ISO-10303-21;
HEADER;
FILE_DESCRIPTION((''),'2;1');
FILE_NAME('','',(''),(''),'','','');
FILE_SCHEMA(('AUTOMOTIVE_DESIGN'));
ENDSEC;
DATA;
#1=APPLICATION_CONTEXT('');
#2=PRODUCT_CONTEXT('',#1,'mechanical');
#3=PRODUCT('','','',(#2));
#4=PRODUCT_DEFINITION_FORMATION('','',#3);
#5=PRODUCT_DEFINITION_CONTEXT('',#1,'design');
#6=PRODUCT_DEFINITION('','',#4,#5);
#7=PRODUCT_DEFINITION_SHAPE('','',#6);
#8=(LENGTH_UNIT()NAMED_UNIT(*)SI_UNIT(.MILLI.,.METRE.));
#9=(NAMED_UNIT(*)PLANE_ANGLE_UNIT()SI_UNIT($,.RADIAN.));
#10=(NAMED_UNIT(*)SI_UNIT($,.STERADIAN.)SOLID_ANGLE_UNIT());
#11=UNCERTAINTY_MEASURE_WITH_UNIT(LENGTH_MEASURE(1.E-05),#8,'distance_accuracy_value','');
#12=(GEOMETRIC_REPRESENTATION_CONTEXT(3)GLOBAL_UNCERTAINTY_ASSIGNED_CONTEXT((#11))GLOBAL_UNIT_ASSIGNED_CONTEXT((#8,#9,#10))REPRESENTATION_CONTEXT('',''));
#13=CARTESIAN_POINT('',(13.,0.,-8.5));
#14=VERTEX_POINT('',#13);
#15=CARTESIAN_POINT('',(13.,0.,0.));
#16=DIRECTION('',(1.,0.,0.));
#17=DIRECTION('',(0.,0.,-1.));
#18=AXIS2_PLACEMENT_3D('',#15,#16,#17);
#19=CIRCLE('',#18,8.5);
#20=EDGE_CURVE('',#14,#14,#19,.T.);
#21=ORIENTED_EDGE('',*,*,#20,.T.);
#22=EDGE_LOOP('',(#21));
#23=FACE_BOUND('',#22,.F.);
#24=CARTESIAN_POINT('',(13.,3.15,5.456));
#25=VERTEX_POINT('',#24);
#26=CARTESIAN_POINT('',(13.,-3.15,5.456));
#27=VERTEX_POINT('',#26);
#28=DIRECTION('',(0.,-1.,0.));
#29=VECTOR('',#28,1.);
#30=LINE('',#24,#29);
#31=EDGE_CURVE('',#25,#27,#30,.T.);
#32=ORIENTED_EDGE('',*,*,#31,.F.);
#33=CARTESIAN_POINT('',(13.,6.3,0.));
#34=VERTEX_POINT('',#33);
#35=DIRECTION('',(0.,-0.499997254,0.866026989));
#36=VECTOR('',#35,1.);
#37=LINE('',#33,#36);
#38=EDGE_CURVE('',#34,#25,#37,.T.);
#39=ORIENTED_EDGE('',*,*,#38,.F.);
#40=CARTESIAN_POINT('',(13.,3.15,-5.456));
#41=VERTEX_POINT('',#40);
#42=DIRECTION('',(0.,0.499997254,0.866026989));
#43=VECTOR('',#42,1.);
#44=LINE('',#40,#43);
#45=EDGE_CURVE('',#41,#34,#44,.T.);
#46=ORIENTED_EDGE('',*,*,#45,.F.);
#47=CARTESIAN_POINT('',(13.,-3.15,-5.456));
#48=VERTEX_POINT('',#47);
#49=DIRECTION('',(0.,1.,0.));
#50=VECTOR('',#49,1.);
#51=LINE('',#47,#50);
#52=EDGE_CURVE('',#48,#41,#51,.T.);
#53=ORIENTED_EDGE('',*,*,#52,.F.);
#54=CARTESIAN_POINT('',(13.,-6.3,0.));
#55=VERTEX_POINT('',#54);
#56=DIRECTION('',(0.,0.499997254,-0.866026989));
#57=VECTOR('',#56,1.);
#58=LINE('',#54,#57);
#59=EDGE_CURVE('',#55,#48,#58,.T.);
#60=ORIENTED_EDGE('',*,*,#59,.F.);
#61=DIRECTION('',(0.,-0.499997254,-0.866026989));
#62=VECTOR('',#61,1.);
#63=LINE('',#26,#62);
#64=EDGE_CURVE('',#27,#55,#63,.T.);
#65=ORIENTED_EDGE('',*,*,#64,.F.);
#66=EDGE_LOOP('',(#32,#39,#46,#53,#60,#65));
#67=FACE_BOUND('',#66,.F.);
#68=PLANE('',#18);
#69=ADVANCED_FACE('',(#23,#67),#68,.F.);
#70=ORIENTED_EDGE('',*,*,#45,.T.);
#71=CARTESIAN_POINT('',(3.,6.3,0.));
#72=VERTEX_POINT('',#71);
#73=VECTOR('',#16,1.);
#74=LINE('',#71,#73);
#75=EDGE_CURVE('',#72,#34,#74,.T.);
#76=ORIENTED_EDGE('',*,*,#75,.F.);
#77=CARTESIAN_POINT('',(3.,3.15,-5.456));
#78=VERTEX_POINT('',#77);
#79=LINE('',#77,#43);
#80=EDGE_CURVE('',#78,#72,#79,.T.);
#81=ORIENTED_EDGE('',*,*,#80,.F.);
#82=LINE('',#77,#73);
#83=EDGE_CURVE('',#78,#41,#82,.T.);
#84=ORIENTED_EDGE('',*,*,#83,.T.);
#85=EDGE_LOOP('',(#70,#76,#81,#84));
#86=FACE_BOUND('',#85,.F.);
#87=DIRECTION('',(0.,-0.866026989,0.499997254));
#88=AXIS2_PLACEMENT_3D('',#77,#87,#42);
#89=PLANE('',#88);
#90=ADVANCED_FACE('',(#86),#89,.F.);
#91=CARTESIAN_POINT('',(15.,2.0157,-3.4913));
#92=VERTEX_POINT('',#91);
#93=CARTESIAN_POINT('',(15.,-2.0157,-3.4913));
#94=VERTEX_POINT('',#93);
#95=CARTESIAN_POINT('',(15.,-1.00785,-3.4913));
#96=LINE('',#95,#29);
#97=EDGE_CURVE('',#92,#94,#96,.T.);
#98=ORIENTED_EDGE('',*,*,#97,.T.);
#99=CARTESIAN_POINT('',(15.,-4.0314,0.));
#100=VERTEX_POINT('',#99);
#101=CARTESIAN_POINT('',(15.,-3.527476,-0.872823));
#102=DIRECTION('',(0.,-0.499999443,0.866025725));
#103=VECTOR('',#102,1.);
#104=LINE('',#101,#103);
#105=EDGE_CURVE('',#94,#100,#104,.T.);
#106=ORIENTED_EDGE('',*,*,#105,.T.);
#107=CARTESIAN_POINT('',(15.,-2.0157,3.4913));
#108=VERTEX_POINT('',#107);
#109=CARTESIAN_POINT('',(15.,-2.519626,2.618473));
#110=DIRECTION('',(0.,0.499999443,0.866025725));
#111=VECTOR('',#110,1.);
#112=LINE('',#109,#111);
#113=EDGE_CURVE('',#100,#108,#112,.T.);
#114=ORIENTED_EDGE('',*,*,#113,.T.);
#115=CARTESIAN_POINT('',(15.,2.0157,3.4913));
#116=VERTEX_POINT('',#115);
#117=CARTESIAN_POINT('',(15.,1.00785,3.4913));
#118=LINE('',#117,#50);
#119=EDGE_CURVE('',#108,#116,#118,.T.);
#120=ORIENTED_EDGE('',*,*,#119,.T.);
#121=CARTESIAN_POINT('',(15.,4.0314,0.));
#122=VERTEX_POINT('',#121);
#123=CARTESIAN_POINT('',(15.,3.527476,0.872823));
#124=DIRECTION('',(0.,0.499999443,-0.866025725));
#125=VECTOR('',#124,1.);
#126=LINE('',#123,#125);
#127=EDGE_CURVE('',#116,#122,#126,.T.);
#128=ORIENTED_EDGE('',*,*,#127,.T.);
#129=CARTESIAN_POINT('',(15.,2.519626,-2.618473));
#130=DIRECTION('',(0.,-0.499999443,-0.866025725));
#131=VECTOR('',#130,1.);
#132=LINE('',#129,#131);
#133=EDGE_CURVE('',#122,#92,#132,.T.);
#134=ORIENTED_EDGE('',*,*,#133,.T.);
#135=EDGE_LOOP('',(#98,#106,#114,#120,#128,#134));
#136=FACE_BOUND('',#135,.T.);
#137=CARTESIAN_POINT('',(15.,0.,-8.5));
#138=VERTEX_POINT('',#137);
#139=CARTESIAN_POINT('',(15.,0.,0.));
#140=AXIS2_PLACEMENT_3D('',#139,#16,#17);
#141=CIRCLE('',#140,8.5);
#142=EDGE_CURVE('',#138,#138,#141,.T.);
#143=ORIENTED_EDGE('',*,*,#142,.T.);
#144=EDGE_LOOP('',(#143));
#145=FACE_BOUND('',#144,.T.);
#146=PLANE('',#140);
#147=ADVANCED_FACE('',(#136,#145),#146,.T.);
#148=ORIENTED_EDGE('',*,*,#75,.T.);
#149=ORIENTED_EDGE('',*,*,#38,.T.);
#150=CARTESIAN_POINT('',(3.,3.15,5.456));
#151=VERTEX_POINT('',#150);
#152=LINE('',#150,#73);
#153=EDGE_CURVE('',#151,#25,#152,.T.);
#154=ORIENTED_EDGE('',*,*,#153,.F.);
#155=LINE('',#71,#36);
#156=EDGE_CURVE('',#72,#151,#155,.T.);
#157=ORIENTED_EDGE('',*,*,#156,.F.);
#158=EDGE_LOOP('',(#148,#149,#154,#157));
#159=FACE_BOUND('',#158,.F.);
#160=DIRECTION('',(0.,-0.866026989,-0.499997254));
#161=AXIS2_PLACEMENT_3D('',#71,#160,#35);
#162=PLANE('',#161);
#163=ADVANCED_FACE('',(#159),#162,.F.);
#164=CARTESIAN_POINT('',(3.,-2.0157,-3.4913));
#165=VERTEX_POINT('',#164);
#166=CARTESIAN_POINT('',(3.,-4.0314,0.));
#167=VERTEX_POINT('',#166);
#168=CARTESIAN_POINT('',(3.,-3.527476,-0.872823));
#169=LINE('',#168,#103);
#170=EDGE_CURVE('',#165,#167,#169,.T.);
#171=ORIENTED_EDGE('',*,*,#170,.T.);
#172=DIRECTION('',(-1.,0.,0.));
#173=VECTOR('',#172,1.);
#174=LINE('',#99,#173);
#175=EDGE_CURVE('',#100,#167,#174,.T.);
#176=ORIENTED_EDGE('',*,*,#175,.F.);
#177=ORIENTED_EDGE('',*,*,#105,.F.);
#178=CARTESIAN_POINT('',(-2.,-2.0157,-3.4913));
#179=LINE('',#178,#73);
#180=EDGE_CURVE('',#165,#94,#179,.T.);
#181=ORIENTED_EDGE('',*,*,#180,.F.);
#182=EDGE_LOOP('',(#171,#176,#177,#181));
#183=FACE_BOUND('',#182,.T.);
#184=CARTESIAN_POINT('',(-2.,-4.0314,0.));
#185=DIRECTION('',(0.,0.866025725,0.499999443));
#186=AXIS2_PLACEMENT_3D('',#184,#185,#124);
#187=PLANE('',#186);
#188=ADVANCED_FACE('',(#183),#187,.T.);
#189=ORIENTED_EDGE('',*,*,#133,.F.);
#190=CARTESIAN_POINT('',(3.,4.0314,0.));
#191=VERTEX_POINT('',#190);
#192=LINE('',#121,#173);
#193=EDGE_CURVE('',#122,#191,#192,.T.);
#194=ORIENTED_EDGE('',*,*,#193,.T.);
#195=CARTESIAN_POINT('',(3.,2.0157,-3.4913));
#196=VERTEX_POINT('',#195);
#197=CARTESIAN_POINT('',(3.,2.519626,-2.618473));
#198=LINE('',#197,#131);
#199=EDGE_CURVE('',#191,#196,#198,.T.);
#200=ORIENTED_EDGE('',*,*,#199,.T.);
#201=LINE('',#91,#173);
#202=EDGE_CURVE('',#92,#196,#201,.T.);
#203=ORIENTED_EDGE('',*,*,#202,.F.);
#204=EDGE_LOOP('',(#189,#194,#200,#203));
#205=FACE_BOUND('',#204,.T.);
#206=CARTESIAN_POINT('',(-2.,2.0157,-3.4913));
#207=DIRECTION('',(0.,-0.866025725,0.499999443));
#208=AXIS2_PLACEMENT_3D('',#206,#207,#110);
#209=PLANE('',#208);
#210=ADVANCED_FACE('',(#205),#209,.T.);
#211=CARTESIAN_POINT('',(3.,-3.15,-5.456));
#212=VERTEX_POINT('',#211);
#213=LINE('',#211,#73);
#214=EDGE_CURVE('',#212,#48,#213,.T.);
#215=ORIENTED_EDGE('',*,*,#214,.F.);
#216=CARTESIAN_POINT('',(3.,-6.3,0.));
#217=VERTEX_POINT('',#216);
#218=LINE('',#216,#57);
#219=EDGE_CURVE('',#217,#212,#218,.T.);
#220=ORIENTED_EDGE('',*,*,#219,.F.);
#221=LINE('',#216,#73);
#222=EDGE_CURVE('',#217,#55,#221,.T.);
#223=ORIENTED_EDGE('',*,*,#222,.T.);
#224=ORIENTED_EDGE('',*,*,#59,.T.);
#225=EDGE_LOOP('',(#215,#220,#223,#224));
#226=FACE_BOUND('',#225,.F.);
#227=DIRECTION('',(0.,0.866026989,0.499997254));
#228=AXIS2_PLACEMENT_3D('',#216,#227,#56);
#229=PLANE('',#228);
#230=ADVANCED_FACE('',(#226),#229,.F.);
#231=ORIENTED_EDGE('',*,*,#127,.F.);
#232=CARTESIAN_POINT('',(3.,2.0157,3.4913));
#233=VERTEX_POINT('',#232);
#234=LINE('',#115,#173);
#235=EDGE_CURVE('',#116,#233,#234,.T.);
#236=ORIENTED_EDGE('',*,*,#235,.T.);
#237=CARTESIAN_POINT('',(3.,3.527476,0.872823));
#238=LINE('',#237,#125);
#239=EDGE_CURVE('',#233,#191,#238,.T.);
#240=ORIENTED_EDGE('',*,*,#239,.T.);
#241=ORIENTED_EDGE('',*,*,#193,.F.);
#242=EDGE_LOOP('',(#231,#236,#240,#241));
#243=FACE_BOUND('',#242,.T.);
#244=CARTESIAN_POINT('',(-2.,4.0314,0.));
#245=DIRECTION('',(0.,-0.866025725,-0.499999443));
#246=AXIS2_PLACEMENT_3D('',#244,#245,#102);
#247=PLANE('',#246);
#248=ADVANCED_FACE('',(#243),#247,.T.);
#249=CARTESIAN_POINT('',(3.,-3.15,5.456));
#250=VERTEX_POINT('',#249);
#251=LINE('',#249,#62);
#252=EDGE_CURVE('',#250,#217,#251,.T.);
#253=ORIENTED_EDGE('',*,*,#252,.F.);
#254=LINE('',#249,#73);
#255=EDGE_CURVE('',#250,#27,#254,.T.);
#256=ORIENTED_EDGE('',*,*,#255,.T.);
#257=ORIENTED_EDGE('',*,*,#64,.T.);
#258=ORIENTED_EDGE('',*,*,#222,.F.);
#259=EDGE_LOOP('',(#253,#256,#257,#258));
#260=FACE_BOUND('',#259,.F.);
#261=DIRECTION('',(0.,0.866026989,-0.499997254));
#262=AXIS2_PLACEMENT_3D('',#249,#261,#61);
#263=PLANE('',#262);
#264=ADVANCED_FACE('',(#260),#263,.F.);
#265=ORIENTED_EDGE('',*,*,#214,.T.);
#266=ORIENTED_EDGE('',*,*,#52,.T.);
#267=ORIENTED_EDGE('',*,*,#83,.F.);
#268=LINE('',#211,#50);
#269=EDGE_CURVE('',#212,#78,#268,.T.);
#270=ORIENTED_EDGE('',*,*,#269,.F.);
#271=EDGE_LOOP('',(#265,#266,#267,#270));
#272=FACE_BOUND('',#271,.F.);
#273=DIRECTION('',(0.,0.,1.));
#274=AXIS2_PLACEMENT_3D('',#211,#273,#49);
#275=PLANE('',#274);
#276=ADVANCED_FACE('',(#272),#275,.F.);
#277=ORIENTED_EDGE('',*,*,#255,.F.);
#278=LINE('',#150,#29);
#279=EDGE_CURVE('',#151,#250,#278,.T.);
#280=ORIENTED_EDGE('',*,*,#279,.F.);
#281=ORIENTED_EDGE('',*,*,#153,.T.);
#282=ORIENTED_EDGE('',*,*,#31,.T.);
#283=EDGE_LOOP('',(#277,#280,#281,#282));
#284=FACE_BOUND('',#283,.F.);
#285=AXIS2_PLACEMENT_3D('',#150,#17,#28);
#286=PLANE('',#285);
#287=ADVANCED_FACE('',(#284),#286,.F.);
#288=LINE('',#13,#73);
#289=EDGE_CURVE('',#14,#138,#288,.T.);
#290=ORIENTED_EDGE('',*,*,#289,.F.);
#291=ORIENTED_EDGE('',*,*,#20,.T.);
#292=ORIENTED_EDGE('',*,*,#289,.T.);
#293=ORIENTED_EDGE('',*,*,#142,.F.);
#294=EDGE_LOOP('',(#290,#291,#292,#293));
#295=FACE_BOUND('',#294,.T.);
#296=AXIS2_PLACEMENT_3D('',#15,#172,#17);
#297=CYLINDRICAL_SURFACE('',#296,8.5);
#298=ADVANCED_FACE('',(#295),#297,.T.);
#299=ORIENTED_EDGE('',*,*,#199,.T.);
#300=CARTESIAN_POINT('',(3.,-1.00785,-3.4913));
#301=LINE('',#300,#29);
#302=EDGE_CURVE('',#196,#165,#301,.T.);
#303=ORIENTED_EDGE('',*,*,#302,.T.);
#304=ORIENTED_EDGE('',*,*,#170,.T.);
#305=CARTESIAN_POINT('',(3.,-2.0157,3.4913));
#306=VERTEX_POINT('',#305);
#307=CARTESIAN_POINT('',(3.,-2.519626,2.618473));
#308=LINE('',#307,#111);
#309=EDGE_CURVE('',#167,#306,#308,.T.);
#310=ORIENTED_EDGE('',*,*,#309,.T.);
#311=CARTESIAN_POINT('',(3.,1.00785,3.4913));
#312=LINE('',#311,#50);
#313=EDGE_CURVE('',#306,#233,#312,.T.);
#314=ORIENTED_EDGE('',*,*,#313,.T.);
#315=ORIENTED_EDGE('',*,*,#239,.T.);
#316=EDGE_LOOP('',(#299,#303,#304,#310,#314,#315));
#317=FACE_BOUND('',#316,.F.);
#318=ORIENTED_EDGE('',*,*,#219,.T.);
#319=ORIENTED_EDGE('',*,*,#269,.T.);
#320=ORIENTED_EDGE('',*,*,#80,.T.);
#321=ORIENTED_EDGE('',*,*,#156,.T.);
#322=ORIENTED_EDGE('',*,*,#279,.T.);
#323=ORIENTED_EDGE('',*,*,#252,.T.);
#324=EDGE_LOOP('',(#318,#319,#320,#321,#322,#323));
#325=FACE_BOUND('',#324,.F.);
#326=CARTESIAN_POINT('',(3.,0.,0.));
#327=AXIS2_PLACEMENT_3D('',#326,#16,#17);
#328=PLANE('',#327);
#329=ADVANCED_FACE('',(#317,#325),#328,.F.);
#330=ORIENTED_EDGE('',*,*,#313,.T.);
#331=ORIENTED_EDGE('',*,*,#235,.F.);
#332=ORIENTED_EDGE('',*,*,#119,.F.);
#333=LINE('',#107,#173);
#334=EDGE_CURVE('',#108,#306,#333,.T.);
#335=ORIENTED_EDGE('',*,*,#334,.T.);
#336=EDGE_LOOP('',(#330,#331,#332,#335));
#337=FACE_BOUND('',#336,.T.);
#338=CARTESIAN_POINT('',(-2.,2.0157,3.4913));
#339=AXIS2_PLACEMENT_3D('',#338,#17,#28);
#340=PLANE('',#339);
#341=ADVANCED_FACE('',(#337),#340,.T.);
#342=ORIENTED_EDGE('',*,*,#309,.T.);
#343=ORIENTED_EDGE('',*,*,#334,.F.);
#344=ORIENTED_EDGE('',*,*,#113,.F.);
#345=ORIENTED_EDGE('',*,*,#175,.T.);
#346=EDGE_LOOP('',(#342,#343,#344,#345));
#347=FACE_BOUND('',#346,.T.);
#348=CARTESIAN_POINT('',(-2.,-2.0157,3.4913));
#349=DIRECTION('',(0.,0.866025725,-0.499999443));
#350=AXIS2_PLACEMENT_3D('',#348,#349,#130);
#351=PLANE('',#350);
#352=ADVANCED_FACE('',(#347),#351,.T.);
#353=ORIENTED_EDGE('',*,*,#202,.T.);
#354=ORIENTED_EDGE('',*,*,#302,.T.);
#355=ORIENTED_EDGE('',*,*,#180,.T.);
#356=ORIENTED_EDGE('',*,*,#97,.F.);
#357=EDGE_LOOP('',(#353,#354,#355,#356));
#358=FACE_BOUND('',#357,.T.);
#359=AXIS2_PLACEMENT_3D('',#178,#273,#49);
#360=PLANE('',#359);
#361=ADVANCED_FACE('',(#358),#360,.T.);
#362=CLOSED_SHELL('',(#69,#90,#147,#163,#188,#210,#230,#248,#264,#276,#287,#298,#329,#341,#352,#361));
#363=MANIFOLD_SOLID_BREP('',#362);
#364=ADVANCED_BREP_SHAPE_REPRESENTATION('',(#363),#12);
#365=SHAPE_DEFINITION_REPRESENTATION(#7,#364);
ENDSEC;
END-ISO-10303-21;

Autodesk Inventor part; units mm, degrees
ref_plane "YZ Plane" through (0, 0, 0) normal (1, 0, 0) x (0, 1, 0)
ref_plane "XZ Plane" through (0, 0, 0) normal (0, 1, 0) x (-1, 0, 0)
ref_plane "XY Plane" through (0, 0, 0) normal (0, 0, 1) x (1, 0, 0)
sketch "Sketch1" plane through (0, 0, 0) normal (1, 0, 0) x (0, 1, 0)
  line L0 (0, 0) -> (3, 0) construction
  line L1 (3, 0) -> (3, -15.0663) construction
  line L2 (3, -15.0663) -> (0, -15.0663) construction
  line L3 (0, -15.0663) -> (0, 0) construction
  line L4 (0, 0) -> (-3, 0) construction
  line L5 (-3, 0) -> (-3, -15.0663) construction
  line L6 (-3, -15.0663) -> (0, -15.0663) construction
  line L7 (0, -15.0663) -> (0, 0) construction
  line L8 (3, -5.1752) -> (-2.9818, -5.1857)
  line L9 (-2.9818, -5.1857) -> (-5.9818, -0.0105)
  line L10 (-5.9818, -0.0105) -> (-3, 5.1752)
  line L11 (-3, 5.1752) -> (2.9818, 5.1857)
  line L12 (2.9818, 5.1857) -> (5.9818, 0.0105)
  line L13 (5.9818, 0.0105) -> (3, -5.1752)
  dimension "d0" = 3
  dimension "d1" = 3
extrude "Extrusion1" add sketch "Sketch1" along normal blind 3
sketch "Sketch2" plane through (0, 0, 0) normal (-1, 0, 0) x (0, 0, 1)
  point P0 (0, 0)
sketch "Sketch3" plane through (0, 0, 0) normal (-1, 0, 0) x (0, 0, 1)
  line L0 (-5.1752, 3) -> (0.0105, 5.9818) projected
  circle A0 centre (0, 0) radius 5.9818
extrude "Extrusion2" add sketch "Sketch3" along normal blind 2
sketch "Sketch4" plane through (3, 0, 0) normal (1, 0, 0) x (0, 0, -1)
  line L0 (0, -4.0315) -> (-3.4914, -2.0157) construction
  line L1 (-3.4914, -2.0157) -> (-3.4914, 2.0157) construction
  line L2 (-3.4914, 2.0157) -> (0, 4.0315) construction
  line L3 (0, 4.0315) -> (3.4914, 2.0157) construction
  line L4 (3.4914, 2.0157) -> (3.4914, -2.0157) construction
  line L5 (3.4914, -2.0157) -> (0, -4.0315) construction
  point P0 (0, 0)
  point P1 (0, 0)
sketch "Sketch5" plane through (3, 0, 0) normal (1, 0, 0) x (0, 0, -1)
  line L0 (0, -4.0314) -> (-3.4913, -2.0157)
  line L1 (-3.4913, -2.0157) -> (-3.4913, 2.0157)
  line L2 (-3.4913, 2.0157) -> (0, 4.0314)
  line L3 (0, 4.0314) -> (3.4913, 2.0157)
  line L4 (3.4913, 2.0157) -> (3.4913, -2.0157)
  line L5 (3.4913, -2.0157) -> (0, -4.0314)
  point P0 (0, 0)
  point P1 (0, 0)
extrude "Extrusion3" cut sketch "Sketch5" against normal blind 10
sketch "Sketch6" plane through (3, 0, 0) normal (1, 0, 0) x (0, 0, -1)
  point P0 (0, 0)
sketch "Sketch7" plane through (3, 0, 0) normal (1, 0, 0) x (0, 0, -1)
  line L0 (3.75, -6.5332) -> (-3.7829, -6.5142) construction
  line L1 (-3.7829, -6.5142) -> (-7.5329, 0.019) construction
  line L2 (-7.5329, 0.019) -> (-3.75, 6.5332) construction
  line L3 (-3.75, 6.5332) -> (3.7829, 6.5142) construction
  line L4 (3.7829, 6.5142) -> (7.5329, -0.019) construction
  line L5 (7.5329, -0.019) -> (3.75, -6.5332) construction
  line L6 (3.75, -6.5332) -> (-3.7829, -6.5142)
  line L7 (-3.7829, -6.5142) -> (-7.5329, 0.019)
  line L8 (-7.5329, 0.019) -> (-3.75, 6.5332)
  line L9 (-3.75, 6.5332) -> (3.7829, 6.5142)
  line L10 (3.7829, 6.5142) -> (7.5329, -0.019)
  line L11 (7.5329, -0.019) -> (3.75, -6.5332)
  point P0 (0, 0)
  point P1 (0, 0)
  point P2 (0, 0)
extrude "Extrusion4" add sketch "Sketch7" along normal blind 10
sketch "Sketch8" plane through (13, 0, 0) normal (1, 0, 0) x (0, 0, -1)
  circle A0 centre (0, 0) radius 8.5
  dimension "d11" = 17
extrude "Extrusion5" add sketch "Sketch8" along normal blind 2
sketch "Sketch9" plane through (-2, 0, 0) normal (-1, 0, 0) x (0, 0, 1)
  line L0 (0, -4.0314) -> (-3.4913, -2.0157) projected
  line L1 (-3.4913, -2.0157) -> (-3.4913, 2.0157)
  line L2 (-3.4913, 2.0157) -> (0, 4.0314)
  line L3 (0, 4.0314) -> (3.4913, 2.0157)
  line L4 (3.4913, 2.0157) -> (3.4913, -2.0157)
  line L5 (3.4913, -2.0157) -> (0, -4.0314)
  line L6 (0, -4.0314) -> (-3.4913, -2.0157)
  point P0 (0, 0)
  point P1 (0, 0)
extrude "Extrusion6" cut sketch "Sketch9" against normal blind 17.25
sketch "Sketch10" plane through (-2, 0, 0) normal (-1, 0, 0) x (0, 0, 1)
  circle A0 centre (0, 0) radius 5.9818
extrude "Extrusion7" cut sketch "Sketch10" against normal blind 5
sketch "Sketch11" plane through (3, 0, 0) normal (-1, 0, 0) x (0, 0, 1)
  line L0 (0, 6.3) -> (4.998, 6.3) construction
  line L1 (4.998, 6.3) -> (4.998, -6.3) construction
  line L2 (4.998, -6.3) -> (0, -6.3) construction
  line L3 (0, -6.3) -> (0, 6.3) construction
  line L4 (7.5329, 0.019) -> (3.75, 6.5332) projected
  line L5 (3.75, 6.5332) -> (7.5329, 0.019)
  line L6 (7.5329, 0.019) -> (3.7829, -6.5142)
  line L7 (3.7829, -6.5142) -> (-3.75, -6.5332)
  line L8 (-3.75, -6.5332) -> (-7.5329, -0.019)
  line L9 (-7.5329, -0.019) -> (-3.7829, 6.5142)
  line L10 (-3.7829, 6.5142) -> (3.75, 6.5332)
  line L11 (0, 6.3) -> (5.456, 3.15)
  line L12 (5.456, 3.15) -> (5.456, -3.15)
  line L13 (5.456, -3.15) -> (0, -6.3)
  line L14 (0, -6.3) -> (-5.456, -3.15)
  line L15 (-5.456, -3.15) -> (-5.456, 3.15)
  line L16 (-5.456, 3.15) -> (0, 6.3)
  point P0 (0, 0)
  point P1 (0, 0)
  point P2 (0, 0)
  dimension "d18" = 12.6
extrude "Extrusion8" cut sketch "Sketch11" against normal blind 10
properties part number "OuterLayerHub"
